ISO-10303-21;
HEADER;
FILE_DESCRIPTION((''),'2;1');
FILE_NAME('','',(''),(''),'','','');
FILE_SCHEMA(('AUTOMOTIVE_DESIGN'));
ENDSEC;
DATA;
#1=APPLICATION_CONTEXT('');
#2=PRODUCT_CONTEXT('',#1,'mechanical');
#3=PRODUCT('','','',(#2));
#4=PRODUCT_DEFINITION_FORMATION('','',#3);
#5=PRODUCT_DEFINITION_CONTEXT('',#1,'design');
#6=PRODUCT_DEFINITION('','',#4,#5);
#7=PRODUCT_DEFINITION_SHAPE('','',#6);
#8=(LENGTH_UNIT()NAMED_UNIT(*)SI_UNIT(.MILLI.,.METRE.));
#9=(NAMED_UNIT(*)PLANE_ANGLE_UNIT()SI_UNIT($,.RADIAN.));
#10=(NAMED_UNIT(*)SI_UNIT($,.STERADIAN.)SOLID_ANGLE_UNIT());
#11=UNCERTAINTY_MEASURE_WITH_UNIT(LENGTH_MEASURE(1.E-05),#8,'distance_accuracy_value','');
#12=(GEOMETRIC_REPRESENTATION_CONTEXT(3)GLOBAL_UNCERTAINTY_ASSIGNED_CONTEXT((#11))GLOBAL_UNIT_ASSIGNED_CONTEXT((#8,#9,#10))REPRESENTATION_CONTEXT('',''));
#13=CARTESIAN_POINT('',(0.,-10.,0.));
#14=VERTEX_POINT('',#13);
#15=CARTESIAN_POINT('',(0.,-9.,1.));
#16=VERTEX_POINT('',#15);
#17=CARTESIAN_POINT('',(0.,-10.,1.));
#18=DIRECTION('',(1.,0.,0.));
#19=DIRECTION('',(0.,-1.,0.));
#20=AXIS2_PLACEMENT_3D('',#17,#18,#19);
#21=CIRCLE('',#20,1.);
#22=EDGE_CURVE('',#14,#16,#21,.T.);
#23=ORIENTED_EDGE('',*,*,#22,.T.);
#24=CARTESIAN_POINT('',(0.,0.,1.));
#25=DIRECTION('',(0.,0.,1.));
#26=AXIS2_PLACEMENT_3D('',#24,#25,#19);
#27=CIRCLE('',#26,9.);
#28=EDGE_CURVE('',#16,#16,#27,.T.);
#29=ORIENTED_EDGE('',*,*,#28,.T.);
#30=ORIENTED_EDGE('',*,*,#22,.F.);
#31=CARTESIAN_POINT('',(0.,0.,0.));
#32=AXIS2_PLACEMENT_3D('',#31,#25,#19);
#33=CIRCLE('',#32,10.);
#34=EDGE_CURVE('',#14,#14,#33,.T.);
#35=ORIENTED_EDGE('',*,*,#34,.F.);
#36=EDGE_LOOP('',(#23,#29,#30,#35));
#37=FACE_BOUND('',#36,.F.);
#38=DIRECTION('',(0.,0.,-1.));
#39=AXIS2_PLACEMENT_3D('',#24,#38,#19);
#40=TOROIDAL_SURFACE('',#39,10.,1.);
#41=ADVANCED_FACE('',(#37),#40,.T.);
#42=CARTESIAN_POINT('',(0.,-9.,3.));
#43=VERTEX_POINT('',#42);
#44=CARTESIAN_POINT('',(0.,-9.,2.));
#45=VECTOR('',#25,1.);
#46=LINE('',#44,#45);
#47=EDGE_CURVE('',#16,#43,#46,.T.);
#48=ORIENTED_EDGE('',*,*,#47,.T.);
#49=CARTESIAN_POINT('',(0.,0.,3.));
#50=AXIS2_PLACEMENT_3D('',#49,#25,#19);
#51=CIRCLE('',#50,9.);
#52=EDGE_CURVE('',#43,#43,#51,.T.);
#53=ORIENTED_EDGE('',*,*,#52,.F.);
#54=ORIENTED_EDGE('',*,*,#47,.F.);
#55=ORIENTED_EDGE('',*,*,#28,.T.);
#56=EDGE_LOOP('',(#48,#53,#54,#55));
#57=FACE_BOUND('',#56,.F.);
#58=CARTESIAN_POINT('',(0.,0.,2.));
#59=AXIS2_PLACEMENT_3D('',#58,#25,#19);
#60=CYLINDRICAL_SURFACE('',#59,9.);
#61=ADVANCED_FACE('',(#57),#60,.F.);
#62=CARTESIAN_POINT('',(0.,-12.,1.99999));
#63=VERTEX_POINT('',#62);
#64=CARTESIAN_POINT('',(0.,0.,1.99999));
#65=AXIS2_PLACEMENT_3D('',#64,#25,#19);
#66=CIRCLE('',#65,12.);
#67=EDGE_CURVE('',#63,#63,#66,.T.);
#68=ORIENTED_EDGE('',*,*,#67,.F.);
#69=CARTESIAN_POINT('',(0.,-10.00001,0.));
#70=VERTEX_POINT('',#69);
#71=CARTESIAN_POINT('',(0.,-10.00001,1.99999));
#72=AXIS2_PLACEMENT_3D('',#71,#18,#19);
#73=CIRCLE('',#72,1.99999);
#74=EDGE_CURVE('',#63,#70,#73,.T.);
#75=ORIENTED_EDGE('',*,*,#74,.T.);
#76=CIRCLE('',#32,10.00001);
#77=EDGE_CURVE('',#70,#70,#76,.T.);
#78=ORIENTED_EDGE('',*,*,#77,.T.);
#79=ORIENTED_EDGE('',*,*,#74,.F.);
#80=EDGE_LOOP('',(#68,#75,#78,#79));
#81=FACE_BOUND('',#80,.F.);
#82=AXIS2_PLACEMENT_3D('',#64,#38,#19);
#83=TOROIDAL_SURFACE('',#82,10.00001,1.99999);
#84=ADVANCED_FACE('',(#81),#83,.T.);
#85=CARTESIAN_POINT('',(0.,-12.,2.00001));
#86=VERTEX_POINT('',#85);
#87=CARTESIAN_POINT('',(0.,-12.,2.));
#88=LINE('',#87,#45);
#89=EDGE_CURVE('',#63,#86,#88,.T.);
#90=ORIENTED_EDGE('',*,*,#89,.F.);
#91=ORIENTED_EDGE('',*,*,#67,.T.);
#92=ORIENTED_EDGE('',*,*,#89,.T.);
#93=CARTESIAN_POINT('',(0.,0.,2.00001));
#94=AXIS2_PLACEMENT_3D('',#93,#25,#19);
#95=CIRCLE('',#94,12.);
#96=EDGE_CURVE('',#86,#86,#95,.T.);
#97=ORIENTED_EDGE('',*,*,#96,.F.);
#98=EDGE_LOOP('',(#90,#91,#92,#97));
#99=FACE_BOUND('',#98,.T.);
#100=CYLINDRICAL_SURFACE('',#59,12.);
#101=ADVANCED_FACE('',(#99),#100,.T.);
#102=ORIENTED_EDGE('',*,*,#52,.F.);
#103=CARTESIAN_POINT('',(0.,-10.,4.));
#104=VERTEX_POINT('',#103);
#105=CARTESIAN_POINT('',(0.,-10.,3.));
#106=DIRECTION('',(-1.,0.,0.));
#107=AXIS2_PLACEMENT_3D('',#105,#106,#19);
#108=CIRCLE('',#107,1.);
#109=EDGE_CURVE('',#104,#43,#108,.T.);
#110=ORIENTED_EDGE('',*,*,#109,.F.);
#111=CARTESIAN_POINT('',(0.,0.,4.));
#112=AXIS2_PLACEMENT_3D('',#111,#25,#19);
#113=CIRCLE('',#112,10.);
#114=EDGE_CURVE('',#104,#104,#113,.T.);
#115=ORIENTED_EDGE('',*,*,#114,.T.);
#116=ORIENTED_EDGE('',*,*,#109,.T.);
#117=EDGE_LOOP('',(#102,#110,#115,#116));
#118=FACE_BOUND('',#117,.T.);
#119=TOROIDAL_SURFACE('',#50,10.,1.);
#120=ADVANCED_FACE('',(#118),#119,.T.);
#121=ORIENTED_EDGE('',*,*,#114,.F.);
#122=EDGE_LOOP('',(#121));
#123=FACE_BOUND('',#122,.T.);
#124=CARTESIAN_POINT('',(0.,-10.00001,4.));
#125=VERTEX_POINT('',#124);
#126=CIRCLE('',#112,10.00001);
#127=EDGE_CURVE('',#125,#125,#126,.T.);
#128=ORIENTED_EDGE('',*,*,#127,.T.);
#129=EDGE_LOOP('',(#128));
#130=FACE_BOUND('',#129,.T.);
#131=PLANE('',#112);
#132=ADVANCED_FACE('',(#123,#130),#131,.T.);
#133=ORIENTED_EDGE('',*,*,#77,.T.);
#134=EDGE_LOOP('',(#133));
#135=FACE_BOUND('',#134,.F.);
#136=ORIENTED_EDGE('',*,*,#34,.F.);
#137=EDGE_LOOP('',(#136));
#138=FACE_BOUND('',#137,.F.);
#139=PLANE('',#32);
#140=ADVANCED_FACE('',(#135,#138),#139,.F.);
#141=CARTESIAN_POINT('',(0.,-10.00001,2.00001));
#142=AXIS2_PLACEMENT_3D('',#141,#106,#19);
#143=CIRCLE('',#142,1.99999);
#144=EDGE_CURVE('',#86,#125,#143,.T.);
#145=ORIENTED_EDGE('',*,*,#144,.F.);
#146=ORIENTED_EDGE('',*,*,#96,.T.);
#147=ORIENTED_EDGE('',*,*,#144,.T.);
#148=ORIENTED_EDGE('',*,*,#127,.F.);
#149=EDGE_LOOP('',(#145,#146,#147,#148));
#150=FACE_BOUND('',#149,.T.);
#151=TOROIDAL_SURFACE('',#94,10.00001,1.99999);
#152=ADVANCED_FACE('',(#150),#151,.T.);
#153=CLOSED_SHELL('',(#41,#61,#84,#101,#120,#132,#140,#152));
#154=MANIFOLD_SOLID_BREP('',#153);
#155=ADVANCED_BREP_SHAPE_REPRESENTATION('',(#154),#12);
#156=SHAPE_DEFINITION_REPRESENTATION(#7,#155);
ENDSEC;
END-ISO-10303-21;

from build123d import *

# Parameters (mm, degrees)
F0_W = 3
F0_H = 4
F2_R = 1.99999
F3_R = 1


# Not quite as in the source:
# - a fillet or chamfer is up to 0.001 mm smaller than in the source, because OpenCascade refuses the exact size


with BuildPart() as f1:
    # F0 (on Right) → F1 (revolve)
    with BuildSketch(Plane.YZ):
        with Locations((-10.5, 2)):
            Rectangle(F0_W, F0_H)
    revolve(axis=Axis((0, 0, 2.5232175078), (0, 0, 1)))

    # F2 (radius 2 in the source; OpenCascade refuses exactly that, so slightly less here)
    f2_edges = [f1.edges().sort_by_distance(p)[0] for p in [
        (0, 12, 0),
        (0, 12, 4),
    ]]
    fillet(f2_edges, radius=F2_R)

    # F3
    f3_edges = [f1.edges().sort_by_distance(p)[0] for p in [
        (0, 9, 0),
        (0, 9, 4),
    ]]
    fillet(f3_edges, radius=F3_R)


solid = f1.part
